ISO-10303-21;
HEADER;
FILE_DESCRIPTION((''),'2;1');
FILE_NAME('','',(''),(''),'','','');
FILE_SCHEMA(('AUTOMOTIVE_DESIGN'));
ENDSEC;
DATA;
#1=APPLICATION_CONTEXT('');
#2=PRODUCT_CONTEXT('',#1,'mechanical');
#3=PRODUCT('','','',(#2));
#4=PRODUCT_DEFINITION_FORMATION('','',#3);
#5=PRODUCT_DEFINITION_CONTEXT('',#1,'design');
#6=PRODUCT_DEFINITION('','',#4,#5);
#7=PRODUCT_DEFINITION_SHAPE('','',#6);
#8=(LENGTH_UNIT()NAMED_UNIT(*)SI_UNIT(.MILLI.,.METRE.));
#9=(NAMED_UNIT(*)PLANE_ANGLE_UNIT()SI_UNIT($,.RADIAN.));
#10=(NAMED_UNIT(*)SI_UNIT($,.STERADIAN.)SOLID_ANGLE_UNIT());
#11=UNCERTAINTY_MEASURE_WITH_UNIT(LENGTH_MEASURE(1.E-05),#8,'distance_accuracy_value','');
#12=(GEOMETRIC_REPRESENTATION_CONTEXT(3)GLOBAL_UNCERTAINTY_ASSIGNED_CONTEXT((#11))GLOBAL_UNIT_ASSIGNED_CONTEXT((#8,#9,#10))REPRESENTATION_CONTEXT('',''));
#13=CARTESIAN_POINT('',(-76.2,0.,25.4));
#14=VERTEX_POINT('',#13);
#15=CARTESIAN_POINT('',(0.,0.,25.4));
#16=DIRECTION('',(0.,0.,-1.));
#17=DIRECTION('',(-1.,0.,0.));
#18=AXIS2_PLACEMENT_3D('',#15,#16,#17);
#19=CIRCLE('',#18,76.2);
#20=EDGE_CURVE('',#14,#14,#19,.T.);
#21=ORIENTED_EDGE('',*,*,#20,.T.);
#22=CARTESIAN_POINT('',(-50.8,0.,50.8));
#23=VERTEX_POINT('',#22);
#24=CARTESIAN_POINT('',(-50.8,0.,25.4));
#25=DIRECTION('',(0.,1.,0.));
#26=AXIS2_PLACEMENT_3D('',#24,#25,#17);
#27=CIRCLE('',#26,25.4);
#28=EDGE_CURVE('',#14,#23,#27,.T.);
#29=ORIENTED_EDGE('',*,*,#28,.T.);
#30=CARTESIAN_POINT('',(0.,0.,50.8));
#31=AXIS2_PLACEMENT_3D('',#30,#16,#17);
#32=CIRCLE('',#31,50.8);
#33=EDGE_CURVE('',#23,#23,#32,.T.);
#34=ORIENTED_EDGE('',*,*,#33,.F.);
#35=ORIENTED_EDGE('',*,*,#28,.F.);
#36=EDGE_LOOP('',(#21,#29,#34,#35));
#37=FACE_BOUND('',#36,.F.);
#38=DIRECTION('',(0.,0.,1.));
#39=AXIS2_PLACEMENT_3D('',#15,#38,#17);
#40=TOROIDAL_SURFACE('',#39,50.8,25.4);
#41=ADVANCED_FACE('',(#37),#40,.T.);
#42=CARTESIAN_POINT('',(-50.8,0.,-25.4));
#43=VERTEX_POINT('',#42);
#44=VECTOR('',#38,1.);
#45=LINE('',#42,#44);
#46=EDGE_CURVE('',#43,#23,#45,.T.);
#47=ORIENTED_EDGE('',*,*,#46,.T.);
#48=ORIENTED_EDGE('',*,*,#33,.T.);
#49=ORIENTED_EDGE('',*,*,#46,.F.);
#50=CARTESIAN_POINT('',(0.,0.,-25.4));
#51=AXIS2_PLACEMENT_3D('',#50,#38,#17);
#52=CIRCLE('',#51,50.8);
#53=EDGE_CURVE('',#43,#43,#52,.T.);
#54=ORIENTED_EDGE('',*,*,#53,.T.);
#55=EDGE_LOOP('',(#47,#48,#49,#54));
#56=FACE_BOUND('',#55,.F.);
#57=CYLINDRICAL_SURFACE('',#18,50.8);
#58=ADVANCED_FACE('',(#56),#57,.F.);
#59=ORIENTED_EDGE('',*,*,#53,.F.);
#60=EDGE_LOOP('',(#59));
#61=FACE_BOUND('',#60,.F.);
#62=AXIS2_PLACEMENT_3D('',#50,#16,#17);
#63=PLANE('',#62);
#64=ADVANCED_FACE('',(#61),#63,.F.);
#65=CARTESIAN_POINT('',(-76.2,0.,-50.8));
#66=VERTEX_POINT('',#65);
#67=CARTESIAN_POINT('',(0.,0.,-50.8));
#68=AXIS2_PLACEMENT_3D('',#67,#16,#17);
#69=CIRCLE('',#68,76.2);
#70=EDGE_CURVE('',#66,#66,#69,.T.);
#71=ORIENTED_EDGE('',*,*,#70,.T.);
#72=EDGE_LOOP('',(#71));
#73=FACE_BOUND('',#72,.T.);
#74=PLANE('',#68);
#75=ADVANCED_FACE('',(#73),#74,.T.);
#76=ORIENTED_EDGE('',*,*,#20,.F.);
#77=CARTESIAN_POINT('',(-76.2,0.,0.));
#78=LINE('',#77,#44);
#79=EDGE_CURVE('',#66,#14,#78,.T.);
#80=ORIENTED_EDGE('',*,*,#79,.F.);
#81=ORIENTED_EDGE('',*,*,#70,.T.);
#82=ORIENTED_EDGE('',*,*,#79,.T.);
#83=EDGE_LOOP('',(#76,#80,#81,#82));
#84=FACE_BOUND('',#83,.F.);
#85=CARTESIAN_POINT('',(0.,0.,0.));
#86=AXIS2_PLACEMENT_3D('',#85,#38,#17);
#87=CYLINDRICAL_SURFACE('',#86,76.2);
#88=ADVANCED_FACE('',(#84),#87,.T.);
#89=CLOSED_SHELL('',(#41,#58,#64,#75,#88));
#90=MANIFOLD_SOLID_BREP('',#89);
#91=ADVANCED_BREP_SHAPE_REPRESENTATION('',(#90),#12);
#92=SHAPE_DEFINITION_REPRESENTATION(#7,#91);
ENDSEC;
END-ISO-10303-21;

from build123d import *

# Parameters (mm, degrees)
F0_W = 76.2
F0_H = 101.6
F2_R = 25.4
F3_T = -25.4


# Not quite as in the source:
# - a shell that OpenCascade refuses in one call is made with other operations: the cavity is built on its own and cut out


with BuildPart() as f1:
    # F0 (on Front) → F1 (revolve)
    with BuildSketch(Plane.XZ):
        with Locations((-38.1, 0)):
            Rectangle(F0_W, F0_H)
    revolve(axis=Axis((0, 0, 0), (0, 0, -1)))

    # F2
    f2_edges = [f1.edges().sort_by_distance(p)[0] for p in [
        (76.2, 0, 50.8),
    ]]
    fillet(f2_edges, radius=F2_R)

    # F3: a shell. OpenCascade refuses it in one call, so the cavity is built on its own and cut out:
    # the body offset inwards by the wall thickness, plus a prism from it out through each open face.
    f3_core = offset(f1.part, amount=F3_T, kind=Kind.INTERSECTION, mode=Mode.PRIVATE)
    f3_exits = [f3_core.faces().sort_by_distance(p)[0] for p in [
        (0, 0, 25.4),
    ]]
    add(f3_core, mode=Mode.SUBTRACT)
    extrude(f3_exits, amount=-F3_T, mode=Mode.SUBTRACT)


solid = f1.part
